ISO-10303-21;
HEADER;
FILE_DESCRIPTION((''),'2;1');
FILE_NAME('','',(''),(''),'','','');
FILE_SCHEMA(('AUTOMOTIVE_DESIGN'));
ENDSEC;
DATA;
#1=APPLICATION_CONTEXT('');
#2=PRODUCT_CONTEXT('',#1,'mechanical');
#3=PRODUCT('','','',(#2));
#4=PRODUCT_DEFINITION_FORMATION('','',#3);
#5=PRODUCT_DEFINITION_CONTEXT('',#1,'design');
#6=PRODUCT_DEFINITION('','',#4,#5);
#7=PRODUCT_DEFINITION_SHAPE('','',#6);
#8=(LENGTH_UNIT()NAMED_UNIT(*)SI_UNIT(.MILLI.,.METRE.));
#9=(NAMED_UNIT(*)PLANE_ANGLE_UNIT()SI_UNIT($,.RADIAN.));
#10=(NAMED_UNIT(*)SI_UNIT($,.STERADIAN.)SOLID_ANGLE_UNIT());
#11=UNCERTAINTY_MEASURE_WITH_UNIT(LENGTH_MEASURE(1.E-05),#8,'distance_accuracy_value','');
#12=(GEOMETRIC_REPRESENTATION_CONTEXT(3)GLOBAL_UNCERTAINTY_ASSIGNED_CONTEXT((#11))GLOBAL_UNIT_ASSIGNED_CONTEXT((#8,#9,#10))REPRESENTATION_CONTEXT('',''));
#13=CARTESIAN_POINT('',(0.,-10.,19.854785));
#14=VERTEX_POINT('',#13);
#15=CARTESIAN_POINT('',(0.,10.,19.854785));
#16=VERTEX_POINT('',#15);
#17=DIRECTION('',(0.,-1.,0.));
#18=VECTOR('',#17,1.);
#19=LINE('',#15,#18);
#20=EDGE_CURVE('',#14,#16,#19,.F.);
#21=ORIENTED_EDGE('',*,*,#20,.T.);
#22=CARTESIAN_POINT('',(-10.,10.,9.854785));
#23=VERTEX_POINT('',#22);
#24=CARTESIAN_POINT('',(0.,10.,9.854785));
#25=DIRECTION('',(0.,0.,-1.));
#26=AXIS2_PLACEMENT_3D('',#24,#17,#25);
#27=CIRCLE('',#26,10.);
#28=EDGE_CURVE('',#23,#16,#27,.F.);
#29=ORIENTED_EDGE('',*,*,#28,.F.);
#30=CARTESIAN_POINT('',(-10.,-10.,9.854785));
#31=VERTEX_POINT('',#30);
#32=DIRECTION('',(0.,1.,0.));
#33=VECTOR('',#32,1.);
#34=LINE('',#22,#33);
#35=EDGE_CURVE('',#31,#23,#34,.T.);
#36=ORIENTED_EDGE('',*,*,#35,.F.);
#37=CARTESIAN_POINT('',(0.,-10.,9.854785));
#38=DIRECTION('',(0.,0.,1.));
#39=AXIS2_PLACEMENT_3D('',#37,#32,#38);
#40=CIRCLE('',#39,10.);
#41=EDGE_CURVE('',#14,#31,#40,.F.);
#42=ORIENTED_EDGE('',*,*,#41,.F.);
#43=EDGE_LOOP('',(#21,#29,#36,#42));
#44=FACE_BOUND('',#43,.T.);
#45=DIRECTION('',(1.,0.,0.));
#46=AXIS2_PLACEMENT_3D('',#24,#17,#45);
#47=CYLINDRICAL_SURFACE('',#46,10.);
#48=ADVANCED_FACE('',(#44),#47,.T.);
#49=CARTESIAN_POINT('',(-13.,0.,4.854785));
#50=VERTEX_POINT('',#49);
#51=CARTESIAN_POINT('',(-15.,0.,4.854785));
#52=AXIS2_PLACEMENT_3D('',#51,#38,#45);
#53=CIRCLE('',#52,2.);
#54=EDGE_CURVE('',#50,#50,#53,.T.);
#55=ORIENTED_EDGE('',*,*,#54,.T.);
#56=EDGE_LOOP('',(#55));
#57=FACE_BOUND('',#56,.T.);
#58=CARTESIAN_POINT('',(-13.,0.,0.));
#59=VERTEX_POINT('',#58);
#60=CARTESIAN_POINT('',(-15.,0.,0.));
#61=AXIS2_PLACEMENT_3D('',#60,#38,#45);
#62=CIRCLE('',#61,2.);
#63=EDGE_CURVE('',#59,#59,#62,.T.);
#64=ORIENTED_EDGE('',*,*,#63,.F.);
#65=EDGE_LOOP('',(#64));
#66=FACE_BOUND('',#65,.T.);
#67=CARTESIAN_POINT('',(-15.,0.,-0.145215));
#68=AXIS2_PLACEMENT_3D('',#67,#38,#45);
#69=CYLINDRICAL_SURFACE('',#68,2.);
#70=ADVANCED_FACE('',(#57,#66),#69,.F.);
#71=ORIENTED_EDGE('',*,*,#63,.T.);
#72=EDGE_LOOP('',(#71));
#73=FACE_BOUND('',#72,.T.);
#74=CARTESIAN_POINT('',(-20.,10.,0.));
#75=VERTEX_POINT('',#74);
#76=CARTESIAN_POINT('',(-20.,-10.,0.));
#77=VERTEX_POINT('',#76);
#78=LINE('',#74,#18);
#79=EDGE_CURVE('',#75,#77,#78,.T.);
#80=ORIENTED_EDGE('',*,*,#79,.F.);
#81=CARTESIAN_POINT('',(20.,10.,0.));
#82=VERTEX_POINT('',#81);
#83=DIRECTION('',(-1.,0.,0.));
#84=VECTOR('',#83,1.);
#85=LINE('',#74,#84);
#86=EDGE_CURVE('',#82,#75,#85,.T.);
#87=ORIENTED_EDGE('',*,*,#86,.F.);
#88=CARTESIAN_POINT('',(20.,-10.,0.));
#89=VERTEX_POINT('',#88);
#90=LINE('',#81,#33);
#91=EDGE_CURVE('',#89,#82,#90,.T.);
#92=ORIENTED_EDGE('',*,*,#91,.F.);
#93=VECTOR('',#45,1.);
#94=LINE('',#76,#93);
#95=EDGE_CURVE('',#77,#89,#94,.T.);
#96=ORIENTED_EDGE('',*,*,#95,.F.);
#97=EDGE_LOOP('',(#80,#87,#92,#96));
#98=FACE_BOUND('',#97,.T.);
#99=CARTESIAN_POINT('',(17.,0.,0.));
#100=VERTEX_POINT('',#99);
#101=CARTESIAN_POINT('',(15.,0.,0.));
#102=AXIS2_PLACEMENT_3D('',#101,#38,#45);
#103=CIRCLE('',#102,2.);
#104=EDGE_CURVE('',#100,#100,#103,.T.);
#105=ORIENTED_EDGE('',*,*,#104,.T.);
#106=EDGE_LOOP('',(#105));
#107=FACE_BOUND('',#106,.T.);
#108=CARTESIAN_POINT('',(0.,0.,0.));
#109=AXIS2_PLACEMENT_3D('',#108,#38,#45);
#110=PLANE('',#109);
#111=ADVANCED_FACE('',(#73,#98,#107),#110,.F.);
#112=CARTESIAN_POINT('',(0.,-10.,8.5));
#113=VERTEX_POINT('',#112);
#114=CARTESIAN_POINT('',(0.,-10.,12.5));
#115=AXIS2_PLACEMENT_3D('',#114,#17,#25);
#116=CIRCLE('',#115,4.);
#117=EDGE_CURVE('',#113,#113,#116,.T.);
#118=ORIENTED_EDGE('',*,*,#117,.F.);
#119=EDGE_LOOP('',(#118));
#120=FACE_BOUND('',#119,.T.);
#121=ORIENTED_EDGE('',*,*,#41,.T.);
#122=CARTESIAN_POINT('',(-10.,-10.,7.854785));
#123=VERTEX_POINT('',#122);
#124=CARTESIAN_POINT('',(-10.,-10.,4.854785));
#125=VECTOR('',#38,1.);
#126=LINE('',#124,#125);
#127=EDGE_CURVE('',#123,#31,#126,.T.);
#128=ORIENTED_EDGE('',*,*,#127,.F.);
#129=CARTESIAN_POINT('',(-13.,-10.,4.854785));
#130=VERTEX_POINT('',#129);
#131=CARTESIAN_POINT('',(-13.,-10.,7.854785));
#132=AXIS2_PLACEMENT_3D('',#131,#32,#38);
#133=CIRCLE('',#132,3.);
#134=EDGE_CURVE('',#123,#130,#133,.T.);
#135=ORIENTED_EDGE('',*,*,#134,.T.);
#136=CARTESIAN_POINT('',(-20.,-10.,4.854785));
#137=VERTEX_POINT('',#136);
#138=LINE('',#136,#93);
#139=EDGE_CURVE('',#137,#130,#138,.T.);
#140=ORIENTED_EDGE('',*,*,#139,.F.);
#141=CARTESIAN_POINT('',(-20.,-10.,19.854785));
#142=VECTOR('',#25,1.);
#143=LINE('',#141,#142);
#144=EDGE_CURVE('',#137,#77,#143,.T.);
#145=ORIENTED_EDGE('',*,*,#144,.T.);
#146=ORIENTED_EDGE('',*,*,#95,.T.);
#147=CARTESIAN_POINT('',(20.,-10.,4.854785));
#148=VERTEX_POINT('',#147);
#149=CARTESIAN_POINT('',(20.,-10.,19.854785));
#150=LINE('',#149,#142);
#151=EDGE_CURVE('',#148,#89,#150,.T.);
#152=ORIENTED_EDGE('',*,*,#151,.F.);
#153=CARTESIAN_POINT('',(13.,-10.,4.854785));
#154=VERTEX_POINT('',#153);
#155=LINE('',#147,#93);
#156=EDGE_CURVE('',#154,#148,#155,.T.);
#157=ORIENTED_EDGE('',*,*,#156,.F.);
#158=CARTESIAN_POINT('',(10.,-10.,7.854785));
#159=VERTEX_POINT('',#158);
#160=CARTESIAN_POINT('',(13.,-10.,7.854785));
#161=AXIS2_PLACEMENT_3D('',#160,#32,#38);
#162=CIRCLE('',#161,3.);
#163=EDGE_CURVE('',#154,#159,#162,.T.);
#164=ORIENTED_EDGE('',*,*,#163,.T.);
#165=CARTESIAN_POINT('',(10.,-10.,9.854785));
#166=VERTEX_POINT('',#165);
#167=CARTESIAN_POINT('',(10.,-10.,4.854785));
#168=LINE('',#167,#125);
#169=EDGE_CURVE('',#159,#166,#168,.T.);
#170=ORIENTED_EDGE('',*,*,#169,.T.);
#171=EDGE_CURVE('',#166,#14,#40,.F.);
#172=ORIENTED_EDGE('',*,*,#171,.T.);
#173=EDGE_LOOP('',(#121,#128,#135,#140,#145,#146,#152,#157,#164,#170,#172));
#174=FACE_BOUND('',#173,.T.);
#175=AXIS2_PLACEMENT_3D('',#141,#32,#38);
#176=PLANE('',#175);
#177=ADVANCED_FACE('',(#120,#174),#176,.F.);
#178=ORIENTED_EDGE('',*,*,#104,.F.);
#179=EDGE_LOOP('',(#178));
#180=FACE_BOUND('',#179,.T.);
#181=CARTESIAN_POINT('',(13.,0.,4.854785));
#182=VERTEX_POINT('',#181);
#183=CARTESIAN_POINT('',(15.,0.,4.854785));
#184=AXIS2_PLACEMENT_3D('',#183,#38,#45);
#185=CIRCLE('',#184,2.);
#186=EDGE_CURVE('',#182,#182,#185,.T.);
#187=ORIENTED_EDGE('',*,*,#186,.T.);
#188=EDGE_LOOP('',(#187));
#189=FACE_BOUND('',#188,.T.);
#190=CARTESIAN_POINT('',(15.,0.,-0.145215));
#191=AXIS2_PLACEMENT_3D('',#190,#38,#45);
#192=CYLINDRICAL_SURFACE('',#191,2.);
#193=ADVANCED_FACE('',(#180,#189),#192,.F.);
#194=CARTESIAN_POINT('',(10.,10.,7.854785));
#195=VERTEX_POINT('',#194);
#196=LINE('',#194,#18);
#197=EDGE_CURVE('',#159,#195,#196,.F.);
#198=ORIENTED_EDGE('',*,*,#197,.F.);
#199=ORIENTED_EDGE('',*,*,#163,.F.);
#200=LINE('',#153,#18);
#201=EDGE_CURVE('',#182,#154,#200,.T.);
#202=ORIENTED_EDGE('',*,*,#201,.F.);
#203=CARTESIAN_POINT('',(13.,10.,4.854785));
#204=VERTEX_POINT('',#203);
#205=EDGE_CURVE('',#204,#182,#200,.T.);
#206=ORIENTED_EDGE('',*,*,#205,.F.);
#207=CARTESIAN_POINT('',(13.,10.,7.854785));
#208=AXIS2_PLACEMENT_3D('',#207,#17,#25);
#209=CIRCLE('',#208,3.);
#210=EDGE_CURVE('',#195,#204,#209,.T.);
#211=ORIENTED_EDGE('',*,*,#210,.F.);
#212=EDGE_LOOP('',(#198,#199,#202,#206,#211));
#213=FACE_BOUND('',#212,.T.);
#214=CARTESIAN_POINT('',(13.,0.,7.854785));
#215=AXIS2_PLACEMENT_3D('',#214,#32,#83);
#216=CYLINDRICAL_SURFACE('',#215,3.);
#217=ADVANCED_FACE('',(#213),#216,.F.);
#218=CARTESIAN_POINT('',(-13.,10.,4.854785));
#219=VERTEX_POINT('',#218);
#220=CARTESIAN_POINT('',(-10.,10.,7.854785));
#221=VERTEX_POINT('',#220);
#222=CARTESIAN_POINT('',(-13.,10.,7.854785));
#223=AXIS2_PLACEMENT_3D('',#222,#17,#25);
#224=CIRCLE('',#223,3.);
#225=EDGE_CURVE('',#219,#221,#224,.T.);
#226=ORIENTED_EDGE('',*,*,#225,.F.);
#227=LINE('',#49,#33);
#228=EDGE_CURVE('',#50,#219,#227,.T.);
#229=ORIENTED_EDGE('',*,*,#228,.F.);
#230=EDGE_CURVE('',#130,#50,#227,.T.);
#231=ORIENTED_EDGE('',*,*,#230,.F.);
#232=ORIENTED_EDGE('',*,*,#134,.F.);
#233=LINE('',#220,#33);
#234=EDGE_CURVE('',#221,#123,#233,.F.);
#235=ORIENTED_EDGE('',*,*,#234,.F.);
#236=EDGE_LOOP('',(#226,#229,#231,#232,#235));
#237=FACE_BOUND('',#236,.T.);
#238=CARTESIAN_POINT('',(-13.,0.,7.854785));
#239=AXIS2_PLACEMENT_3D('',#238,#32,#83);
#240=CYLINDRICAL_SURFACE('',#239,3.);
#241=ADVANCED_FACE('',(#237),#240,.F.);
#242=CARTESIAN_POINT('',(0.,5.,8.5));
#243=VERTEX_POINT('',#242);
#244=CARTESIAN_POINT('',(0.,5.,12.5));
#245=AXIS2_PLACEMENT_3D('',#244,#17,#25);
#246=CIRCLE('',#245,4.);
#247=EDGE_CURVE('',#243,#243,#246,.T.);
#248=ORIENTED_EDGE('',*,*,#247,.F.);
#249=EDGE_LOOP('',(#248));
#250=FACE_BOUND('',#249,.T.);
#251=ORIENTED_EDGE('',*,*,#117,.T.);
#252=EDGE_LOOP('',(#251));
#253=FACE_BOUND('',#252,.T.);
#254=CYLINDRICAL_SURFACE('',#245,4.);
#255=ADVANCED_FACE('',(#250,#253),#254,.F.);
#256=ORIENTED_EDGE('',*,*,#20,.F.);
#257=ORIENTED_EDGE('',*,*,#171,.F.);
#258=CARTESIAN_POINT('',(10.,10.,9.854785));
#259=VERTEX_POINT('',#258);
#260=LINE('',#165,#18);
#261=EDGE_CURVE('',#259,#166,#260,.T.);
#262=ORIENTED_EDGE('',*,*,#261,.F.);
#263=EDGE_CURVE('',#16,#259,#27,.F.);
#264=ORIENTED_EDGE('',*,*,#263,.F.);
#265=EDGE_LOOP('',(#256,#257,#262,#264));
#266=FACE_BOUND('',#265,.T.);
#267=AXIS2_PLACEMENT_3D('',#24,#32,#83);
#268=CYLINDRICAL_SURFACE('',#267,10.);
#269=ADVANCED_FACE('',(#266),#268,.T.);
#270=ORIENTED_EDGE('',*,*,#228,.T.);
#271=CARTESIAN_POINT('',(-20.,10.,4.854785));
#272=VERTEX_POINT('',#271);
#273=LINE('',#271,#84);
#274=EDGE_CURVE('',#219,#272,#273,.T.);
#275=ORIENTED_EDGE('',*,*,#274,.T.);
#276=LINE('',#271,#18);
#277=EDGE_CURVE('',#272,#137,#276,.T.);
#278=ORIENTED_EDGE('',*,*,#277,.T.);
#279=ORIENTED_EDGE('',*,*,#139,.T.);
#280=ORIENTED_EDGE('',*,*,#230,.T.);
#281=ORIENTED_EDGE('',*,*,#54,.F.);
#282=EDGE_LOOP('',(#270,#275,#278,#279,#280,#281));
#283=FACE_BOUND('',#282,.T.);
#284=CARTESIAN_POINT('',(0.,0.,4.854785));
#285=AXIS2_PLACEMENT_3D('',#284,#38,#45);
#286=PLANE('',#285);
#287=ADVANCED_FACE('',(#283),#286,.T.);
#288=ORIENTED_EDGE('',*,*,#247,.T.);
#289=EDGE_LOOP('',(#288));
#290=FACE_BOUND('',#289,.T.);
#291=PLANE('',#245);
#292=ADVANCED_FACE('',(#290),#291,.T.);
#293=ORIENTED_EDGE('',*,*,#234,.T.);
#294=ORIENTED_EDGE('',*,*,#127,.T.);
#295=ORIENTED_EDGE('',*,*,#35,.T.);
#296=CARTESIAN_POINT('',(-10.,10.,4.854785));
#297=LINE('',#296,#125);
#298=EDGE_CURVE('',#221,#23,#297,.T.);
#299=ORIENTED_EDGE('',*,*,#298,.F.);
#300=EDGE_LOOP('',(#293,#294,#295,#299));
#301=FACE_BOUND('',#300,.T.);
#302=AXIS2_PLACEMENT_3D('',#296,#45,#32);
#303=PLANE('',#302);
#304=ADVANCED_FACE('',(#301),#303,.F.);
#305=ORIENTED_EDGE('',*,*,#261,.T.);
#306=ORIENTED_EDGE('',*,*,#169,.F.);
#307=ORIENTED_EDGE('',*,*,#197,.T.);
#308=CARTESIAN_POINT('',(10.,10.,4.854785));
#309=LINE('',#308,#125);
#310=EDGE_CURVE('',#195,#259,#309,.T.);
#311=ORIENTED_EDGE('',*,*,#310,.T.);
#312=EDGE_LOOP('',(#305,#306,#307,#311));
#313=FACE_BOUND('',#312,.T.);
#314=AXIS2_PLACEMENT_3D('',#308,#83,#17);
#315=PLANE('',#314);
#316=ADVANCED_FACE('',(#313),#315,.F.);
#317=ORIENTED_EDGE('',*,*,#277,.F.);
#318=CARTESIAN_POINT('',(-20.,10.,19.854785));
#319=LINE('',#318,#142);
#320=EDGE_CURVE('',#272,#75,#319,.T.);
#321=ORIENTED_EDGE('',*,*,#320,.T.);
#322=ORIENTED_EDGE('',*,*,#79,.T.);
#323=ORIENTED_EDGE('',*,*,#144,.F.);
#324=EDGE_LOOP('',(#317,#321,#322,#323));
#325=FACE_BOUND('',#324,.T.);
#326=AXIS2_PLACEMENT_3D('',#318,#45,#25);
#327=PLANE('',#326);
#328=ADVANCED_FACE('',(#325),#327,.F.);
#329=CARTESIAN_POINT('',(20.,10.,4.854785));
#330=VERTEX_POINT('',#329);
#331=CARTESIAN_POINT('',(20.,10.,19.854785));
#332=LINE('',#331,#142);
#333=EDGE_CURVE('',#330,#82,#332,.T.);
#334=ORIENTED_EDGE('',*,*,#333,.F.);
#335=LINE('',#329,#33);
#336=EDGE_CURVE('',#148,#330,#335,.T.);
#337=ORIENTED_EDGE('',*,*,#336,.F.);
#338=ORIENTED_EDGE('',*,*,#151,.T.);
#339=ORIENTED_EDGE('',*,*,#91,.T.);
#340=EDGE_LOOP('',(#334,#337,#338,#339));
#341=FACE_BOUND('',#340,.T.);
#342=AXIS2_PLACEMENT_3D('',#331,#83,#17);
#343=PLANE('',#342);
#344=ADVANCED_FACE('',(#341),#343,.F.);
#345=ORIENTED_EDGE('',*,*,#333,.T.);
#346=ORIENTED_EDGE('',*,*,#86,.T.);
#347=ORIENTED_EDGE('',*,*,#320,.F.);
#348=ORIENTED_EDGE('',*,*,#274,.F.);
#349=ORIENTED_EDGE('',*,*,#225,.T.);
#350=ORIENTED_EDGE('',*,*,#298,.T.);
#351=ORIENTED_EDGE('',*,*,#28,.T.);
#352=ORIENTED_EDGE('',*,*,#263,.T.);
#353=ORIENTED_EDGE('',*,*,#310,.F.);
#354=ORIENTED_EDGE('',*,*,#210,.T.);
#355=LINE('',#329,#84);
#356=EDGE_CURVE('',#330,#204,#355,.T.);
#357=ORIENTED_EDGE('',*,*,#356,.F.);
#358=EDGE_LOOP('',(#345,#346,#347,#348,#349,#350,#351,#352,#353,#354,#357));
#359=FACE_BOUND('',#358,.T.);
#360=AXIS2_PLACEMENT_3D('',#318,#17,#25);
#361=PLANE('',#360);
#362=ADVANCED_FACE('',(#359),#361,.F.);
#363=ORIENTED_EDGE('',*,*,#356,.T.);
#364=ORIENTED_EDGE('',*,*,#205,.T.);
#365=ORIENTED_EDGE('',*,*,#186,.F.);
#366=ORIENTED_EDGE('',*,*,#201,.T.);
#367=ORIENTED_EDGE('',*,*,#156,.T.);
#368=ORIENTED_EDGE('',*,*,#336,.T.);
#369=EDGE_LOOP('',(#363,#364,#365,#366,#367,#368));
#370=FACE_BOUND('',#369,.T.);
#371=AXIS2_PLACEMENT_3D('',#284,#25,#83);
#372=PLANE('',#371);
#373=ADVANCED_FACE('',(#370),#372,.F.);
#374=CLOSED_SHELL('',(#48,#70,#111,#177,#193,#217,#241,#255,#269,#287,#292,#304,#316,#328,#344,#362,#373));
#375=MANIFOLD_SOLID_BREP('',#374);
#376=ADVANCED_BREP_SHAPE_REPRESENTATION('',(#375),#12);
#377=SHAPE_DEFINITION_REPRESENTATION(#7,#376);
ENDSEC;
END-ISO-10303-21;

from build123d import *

# Parameters (mm, degrees)
SKETCH6_W           = 40
SKETCH6_H           = 20
BOSS_EXTRUDE3_DEPTH = 19.854784811
SKETCH9_W           = 10
SKETCH9_H           = 20
CUT_EXTRUDE6_DEPTH  = 15
SKETCH10_R          = 4
CUT_EXTRUDE7_DEPTH  = 15
SKETCH11_R          = 2
CUT_EXTRUDE8_DEPTH  = 5
FILLET1_R           = 10
FILLET2_R           = 10
FILLET5_R           = 3


with BuildPart() as part:
    # Sketch6 → Boss-Extrude3 (new body)
    with BuildSketch(Plane.XY):
        Rectangle(SKETCH6_W, SKETCH6_H)
    extrude(amount=BOSS_EXTRUDE3_DEPTH)

    # Sketch9 → Cut-Extrude6 (cut)
    with BuildSketch(Plane.XY.offset(19.854784811)):
        with Locations((-15, 0)):
            Rectangle(SKETCH9_W, SKETCH9_H)
        with Locations((15, 0)):
            Rectangle(SKETCH9_W, SKETCH9_H)
    extrude(amount=-CUT_EXTRUDE6_DEPTH, mode=Mode.SUBTRACT)

    # Sketch10 → Cut-Extrude7 (cut)
    with BuildSketch(Plane.XZ.offset(10)):
        with Locations(Location((0, 12.5, 0), (0, 0, 270))):
            Circle(SKETCH10_R)
    extrude(amount=-CUT_EXTRUDE7_DEPTH, mode=Mode.SUBTRACT)

    # Sketch11 → Cut-Extrude8 (cut)
    with BuildSketch(Plane.XY.offset(4.854784811)):
        with Locations((-15, 0)):
            Circle(SKETCH11_R)
        with Locations((15, 0)):
            Circle(SKETCH11_R)
    extrude(amount=-CUT_EXTRUDE8_DEPTH, mode=Mode.SUBTRACT)

    # Fillet1
    fillet1_edges = [part.edges().sort_by_distance(p)[0] for p in [
        (10, 0, 19.854784811),
    ]]
    fillet(fillet1_edges, radius=FILLET1_R)

    # Fillet2
    fillet2_edges = [part.edges().sort_by_distance(p)[0] for p in [
        (-10, 0, 19.854784811),
    ]]
    fillet(fillet2_edges, radius=FILLET2_R - 0.0001)  # a hair under: the kernel refuses the full size

    # Fillet5
    fillet5_edges = [part.edges().sort_by_distance(p)[0] for p in [
        (-10, 0, 4.854784811),
        (10, 0, 4.854784811),
    ]]
    fillet(fillet5_edges, radius=FILLET5_R - 0.0001)  # a hair under: the kernel refuses the full size


solid = part.part
